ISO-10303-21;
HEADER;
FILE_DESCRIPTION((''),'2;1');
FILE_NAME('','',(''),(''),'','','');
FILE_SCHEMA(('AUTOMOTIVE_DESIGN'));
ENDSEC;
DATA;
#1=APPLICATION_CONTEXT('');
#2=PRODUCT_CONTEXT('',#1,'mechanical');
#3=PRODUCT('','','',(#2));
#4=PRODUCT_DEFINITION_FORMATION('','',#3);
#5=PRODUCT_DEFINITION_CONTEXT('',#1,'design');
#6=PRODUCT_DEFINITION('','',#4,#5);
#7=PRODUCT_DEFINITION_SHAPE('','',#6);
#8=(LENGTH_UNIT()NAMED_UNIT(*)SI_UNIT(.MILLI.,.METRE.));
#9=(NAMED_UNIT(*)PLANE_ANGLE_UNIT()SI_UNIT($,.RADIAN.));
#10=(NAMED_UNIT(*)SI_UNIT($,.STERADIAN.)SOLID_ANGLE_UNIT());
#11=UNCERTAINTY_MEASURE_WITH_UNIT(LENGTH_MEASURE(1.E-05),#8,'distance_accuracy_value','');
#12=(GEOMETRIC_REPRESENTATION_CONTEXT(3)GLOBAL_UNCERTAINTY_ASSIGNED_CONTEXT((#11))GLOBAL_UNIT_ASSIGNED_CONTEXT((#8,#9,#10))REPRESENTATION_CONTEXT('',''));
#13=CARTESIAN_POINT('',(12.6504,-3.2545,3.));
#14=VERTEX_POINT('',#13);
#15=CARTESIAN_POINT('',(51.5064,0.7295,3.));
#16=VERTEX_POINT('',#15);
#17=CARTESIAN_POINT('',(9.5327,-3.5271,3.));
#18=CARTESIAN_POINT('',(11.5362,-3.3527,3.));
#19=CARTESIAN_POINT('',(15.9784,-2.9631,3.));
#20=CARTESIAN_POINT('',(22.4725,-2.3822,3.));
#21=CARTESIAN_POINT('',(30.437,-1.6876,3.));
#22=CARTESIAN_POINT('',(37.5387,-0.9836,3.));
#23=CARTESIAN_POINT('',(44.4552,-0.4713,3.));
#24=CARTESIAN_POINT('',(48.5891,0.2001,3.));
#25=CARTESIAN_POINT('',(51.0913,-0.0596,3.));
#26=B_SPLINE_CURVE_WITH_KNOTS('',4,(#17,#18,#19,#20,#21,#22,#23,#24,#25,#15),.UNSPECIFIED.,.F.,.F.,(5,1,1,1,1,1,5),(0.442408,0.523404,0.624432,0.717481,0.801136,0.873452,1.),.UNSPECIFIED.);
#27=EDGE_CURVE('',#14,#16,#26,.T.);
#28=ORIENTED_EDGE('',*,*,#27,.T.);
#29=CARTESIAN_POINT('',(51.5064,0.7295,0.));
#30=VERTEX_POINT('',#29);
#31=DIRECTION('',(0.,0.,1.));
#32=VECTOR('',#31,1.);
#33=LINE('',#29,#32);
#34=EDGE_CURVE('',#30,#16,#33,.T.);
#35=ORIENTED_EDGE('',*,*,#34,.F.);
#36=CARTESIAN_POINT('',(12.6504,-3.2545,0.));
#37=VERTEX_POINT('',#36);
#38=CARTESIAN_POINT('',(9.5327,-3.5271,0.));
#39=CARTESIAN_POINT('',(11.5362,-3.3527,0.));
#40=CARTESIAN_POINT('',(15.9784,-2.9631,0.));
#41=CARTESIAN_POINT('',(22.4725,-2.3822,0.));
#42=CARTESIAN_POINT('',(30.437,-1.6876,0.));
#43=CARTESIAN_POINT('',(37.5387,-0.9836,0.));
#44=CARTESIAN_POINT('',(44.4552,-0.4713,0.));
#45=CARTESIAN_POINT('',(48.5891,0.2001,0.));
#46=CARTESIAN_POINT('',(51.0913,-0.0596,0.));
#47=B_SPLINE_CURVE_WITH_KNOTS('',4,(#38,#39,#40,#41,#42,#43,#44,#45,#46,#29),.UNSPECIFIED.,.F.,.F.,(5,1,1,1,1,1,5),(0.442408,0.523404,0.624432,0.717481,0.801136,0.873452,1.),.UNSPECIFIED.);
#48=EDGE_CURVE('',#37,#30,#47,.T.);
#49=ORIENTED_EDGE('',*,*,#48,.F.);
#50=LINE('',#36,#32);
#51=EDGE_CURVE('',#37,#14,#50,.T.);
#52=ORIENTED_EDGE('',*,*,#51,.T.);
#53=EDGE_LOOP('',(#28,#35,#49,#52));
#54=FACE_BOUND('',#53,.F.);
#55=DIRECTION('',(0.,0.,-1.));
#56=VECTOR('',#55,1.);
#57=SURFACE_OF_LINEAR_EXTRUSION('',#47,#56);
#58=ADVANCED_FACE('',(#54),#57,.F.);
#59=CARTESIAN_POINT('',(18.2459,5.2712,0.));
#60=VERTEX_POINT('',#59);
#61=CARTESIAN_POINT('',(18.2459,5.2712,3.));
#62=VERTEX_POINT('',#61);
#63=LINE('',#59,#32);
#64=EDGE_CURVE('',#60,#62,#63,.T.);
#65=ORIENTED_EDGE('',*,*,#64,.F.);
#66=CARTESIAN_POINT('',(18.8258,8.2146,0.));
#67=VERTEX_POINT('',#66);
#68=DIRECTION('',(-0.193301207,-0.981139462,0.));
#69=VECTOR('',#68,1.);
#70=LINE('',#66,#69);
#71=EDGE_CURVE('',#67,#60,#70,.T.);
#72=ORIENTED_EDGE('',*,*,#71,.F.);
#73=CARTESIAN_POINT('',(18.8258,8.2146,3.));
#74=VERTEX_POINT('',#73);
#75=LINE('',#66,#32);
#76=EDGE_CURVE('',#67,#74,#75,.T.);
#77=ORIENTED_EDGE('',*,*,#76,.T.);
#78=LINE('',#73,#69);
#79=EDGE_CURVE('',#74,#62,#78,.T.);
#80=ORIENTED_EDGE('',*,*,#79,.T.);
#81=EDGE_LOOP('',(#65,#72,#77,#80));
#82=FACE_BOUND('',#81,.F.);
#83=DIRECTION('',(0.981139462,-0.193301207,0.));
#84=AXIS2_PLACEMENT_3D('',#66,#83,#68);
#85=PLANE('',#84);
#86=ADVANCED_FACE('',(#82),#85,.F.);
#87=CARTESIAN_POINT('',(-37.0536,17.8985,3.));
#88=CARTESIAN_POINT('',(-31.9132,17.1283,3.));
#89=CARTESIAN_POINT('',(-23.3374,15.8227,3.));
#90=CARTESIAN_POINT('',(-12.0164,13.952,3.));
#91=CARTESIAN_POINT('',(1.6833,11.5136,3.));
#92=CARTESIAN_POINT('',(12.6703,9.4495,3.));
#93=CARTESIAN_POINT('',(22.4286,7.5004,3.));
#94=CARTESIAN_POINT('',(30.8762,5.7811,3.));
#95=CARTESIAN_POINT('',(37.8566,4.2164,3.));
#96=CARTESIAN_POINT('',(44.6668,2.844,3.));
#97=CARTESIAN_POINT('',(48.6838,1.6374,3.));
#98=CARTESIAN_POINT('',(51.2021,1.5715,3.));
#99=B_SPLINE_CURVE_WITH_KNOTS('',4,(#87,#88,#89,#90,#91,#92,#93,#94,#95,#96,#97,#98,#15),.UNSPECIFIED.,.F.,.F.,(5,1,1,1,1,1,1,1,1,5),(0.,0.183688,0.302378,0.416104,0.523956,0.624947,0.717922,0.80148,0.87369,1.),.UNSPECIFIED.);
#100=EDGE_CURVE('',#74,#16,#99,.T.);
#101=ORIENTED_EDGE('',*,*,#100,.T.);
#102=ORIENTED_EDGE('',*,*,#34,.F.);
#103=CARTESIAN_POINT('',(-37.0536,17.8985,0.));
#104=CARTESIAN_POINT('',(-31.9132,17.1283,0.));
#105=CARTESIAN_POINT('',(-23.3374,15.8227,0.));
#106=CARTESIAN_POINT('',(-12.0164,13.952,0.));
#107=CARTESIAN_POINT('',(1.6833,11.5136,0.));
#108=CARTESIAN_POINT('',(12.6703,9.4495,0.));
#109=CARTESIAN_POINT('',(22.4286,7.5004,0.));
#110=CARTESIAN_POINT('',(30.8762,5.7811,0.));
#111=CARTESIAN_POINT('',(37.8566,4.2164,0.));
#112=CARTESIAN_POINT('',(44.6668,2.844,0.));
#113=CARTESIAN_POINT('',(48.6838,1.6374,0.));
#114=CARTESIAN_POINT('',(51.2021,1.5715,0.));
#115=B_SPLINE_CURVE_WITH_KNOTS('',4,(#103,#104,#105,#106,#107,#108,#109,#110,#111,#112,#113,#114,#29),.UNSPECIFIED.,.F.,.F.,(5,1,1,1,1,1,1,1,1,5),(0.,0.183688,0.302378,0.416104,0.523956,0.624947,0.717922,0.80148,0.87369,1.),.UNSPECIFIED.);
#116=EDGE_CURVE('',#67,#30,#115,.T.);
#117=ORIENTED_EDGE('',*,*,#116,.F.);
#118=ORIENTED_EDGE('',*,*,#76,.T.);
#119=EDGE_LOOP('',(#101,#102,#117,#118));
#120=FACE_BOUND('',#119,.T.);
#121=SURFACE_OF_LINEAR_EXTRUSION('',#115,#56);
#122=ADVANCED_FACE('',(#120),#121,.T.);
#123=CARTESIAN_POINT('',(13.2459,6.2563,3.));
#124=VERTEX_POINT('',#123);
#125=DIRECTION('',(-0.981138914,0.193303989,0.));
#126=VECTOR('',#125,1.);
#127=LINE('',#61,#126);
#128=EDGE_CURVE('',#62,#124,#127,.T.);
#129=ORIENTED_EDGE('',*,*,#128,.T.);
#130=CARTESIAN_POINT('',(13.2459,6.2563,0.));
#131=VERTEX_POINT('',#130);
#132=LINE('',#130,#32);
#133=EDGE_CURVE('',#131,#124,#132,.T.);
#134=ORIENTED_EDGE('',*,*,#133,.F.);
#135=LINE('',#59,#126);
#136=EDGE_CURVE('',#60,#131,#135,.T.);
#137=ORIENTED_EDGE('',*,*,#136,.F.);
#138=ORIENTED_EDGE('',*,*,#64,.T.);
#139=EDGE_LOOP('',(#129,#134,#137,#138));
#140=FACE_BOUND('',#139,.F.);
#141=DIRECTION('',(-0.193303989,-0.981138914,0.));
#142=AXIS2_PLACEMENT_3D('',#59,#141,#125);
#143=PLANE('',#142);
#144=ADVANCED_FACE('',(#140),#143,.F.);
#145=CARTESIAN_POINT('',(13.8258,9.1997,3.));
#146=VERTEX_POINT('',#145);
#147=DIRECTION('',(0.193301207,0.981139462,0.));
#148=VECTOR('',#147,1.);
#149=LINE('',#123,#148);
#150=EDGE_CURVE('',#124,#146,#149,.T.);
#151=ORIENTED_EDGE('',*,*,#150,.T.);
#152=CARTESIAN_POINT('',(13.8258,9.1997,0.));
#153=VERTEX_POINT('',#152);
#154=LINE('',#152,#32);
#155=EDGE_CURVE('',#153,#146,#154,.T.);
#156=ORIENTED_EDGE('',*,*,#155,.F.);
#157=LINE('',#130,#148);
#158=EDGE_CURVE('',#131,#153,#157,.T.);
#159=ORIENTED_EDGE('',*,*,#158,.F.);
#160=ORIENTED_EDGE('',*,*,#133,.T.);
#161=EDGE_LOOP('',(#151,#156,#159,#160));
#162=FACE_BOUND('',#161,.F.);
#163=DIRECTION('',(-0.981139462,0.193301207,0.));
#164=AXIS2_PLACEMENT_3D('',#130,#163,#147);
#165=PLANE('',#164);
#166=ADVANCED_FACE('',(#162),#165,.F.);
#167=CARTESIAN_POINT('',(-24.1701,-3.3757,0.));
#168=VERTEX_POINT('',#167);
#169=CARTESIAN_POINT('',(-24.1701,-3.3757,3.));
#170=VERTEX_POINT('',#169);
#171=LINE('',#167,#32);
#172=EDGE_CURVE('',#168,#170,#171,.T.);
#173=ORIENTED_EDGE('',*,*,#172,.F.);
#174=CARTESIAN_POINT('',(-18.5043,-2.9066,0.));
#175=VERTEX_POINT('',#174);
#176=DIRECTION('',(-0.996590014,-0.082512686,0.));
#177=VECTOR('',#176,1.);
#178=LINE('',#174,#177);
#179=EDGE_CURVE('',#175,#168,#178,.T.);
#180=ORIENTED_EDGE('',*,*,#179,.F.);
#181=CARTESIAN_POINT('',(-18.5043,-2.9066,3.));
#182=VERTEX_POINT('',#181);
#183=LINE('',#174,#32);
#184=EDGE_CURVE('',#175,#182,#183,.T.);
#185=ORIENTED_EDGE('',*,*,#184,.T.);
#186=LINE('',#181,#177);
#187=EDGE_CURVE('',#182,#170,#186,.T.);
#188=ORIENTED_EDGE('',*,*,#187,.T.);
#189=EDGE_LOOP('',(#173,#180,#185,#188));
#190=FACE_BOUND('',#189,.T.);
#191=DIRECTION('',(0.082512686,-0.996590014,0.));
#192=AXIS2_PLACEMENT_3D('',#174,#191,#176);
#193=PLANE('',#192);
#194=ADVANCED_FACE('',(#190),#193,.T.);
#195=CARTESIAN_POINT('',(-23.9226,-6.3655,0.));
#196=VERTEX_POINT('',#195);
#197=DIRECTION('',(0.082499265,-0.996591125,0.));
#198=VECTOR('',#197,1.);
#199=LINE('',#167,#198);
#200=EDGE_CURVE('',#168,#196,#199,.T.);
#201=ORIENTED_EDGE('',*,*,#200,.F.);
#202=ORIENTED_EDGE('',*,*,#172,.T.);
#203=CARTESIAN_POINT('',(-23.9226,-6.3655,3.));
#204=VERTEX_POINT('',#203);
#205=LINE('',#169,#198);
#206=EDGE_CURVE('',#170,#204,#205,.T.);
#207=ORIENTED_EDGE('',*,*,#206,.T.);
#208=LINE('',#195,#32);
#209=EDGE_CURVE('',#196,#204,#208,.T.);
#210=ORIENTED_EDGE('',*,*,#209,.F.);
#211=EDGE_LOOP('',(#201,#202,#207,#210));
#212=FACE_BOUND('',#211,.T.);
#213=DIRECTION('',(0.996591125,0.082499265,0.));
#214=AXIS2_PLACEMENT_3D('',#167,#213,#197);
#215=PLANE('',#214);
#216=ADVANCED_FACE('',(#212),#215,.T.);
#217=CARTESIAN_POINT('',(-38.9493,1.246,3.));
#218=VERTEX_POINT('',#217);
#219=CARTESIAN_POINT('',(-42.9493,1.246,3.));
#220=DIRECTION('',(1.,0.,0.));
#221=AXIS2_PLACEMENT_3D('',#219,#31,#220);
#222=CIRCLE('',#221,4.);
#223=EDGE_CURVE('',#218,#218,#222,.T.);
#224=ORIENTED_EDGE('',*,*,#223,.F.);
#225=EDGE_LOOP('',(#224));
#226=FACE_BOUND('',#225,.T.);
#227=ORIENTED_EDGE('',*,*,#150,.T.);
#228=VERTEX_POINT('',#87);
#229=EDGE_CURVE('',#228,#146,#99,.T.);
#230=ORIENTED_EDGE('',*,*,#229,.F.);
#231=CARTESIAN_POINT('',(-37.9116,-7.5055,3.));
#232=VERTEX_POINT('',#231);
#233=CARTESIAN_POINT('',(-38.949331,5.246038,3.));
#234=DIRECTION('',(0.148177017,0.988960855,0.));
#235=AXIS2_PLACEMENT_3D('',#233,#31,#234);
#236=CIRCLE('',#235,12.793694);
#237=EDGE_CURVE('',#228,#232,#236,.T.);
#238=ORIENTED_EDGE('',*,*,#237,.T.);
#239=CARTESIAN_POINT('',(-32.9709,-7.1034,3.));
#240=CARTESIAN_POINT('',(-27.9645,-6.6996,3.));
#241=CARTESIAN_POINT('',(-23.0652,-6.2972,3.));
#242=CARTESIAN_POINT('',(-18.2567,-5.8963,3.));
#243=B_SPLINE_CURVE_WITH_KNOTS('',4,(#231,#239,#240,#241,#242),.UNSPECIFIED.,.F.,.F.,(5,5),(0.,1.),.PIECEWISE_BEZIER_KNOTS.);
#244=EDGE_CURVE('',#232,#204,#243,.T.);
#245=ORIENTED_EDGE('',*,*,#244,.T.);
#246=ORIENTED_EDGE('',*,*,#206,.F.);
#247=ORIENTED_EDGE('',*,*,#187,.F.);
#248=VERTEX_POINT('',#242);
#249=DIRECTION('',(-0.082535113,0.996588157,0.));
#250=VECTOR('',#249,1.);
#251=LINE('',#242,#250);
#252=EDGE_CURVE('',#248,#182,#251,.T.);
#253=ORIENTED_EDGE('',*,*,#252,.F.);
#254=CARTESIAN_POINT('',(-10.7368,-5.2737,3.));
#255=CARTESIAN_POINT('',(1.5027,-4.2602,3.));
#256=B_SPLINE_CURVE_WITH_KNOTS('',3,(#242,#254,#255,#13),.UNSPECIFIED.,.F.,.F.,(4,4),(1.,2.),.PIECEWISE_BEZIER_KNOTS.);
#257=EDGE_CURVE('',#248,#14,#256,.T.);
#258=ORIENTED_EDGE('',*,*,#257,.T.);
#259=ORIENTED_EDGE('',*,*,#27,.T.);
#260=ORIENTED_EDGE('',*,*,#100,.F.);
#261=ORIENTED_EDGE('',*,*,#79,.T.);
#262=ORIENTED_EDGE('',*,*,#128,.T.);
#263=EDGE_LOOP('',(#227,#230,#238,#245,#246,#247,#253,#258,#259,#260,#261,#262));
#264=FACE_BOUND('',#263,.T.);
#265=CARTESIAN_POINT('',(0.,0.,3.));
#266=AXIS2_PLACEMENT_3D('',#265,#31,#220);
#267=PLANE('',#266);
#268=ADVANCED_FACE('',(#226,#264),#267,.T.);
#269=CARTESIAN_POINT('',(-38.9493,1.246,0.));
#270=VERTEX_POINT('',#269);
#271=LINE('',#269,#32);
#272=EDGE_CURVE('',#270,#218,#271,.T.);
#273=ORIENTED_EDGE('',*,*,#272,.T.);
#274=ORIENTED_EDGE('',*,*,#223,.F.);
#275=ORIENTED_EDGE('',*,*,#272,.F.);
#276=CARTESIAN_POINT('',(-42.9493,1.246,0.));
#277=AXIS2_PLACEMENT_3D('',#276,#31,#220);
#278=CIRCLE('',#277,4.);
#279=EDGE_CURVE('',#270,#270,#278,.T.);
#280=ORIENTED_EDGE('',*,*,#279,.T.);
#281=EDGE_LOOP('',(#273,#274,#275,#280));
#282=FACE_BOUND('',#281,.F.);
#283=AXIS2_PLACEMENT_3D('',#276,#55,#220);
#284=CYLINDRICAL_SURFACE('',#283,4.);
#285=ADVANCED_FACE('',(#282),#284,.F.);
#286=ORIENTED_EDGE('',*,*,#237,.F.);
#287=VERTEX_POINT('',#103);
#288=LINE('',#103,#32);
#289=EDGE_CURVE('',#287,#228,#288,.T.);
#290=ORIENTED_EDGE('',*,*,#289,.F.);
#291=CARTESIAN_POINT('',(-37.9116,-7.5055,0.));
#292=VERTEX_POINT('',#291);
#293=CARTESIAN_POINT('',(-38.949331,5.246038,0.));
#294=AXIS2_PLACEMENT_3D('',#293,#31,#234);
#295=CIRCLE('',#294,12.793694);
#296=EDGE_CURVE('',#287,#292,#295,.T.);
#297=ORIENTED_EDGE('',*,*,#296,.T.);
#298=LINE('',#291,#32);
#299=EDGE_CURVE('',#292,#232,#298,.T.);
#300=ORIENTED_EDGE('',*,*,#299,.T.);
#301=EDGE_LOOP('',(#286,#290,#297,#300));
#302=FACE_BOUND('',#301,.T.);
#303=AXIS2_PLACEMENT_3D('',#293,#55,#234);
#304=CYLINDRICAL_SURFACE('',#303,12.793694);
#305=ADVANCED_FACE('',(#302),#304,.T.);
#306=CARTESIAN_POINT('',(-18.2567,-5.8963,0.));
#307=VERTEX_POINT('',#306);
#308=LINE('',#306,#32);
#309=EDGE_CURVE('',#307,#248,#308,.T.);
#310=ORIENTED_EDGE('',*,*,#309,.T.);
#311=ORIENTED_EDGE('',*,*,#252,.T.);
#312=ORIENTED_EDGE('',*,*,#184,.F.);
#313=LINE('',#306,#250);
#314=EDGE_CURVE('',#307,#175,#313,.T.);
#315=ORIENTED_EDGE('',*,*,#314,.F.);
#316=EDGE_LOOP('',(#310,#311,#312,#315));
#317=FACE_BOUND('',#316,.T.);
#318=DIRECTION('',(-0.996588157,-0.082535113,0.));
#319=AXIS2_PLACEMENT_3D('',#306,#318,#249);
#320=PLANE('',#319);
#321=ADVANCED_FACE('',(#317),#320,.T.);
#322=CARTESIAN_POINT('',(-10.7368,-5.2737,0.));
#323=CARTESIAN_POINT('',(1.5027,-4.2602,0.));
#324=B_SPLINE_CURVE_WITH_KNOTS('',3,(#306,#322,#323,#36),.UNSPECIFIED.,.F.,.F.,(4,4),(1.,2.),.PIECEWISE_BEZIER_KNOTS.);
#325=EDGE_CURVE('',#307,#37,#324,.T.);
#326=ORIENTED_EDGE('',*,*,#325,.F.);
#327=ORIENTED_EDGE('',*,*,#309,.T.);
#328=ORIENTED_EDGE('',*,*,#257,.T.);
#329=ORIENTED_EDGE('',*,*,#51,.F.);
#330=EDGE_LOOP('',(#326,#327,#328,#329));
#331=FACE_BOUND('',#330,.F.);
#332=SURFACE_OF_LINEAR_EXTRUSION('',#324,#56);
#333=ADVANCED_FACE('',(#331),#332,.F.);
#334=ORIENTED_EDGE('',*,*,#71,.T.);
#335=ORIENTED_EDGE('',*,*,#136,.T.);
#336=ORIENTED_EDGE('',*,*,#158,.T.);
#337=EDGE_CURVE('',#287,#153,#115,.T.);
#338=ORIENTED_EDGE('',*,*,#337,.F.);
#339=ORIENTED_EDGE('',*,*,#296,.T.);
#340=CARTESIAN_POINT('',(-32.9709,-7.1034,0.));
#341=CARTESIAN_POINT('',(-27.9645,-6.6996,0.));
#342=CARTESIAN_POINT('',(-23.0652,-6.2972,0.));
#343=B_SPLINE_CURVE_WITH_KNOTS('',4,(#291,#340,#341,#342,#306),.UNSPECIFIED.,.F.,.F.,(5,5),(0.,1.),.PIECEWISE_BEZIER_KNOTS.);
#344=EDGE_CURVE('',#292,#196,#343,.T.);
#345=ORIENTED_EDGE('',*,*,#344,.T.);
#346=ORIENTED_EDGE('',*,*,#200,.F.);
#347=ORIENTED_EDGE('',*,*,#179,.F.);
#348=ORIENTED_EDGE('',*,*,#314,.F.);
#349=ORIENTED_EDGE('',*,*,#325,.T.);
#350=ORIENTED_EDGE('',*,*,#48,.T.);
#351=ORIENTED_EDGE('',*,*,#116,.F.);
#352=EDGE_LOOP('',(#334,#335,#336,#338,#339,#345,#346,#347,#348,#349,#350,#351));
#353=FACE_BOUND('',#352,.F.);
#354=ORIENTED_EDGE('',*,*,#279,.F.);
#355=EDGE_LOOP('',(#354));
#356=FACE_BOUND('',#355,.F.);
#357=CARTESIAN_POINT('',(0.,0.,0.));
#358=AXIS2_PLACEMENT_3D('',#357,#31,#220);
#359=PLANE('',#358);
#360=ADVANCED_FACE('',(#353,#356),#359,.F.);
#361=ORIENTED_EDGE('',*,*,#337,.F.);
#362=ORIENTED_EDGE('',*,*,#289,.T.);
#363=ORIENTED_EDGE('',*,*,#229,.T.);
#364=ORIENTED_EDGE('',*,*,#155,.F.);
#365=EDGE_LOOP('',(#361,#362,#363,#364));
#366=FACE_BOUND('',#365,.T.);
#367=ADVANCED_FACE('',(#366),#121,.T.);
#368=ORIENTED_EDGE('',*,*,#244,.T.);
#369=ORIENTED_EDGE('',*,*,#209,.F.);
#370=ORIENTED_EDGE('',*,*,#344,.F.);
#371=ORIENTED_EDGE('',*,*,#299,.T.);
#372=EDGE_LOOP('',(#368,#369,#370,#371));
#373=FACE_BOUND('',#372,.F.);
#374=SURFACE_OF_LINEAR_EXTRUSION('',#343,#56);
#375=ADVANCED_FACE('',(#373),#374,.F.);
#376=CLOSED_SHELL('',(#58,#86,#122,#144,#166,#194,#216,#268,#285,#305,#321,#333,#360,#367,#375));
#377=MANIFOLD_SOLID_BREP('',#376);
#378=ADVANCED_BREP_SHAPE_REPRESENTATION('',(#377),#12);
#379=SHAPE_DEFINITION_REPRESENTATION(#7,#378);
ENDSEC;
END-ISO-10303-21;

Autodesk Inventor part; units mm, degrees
ref_plane "YZ Plane" through (0, 0, 0) normal (1, 0, 0) x (0, 1, 0)
ref_plane "XZ Plane" through (0, 0, 0) normal (0, 1, 0) x (-1, 0, 0)
ref_plane "XY Plane" through (0, 0, 0) normal (0, 0, 1) x (1, 0, 0)
sketch "Sketch1" plane through (0, 0, 0) normal (0, 0, 1) x (1, 0, 0)
  line L0 (18.8258, 8.2146) -> (18.2459, 5.2712)
  line L1 (13.8258, 9.1997) -> (18.8258, 8.2146)
  line L2 (13.2459, 6.2563) -> (13.8258, 9.1997)
  line L3 (18.2459, 5.2712) -> (13.2459, 6.2563)
  spline S0 degree 4 poles (-37.0536, 17.8985) (-31.9132, 17.1283) (-23.3374, 15.8227) (-12.0164, 13.952) (1.6833, 11.5136) (12.6703, 9.4495) (22.4286, 7.5004) (30.8762, 5.7811) (37.8566, 4.2164) (44.6668, 2.844) (48.6838, 1.6374) (51.2021, 1.5715) (51.5064, 0.7295) knots 0 0 0 0 0 0.183688 0.302378 0.416104 0.523956 0.624947 0.717922 0.80148 0.87369 1 1 1 1 1
  spline S1 degree 2 poles (-25.4832, 9.8892) (-25.3745, 9.8731) (-25.2658, 9.857) knots 0 0 0 1 1 1
  line L4 (-25.288, 9.8603) -> (-25.2437, 9.8537) construction
  arc A0 (-25.2481, 9.8544) -> (-25.2836, 9.8596) centre (-40.8454, -94.9669) ccw construction
  line L5 (-24.1701, -3.3757) -> (-23.9226, -6.3655)
  line L6 (-23.9226, -6.3655) -> (-18.2567, -5.8963)
  line L7 (-18.5043, -2.9066) -> (-24.1701, -3.3757)
  line L8 (-38.9493, 5.246) -> (-38.9493, 1.246)
  line L9 (-38.9493, 1.246) -> (-42.9493, 1.246)
  circle A1 centre (-42.9493, 1.246) radius 4
  arc A2 (-37.0536, 17.8985) -> (-37.9116, -7.5055) centre (-38.9493, 5.246) ccw
  line L10 (-18.2567, -5.8963) -> (-18.5043, -2.9066)
  line L11 (-20.2449, -6.0621) -> (-16.2685, -5.7306) construction
  arc A3 (-19.8473, -6.0287) -> (-16.6662, -5.7635) centre (-448.7094, 5192.5355) ccw construction
  spline S2 degree 4 poles (-37.9116, -7.5055) (-32.9709, -7.1034) (-27.9645, -6.6996) (-23.0652, -6.2972) (-18.2567, -5.8963) knots 0 0 0 0 0 1 1 1 1 1
  spline S3 degree 4 poles (9.5327, -3.5271) (11.5362, -3.3527) (15.9784, -2.9631) (22.4725, -2.3822) (30.437, -1.6876) (37.5387, -0.9836) (44.4552, -0.4713) (48.5891, 0.2001) (51.0913, -0.0596) (51.5064, 0.7295) knots 0.442408 0.442408 0.442408 0.442408 0.442408 0.523404 0.624432 0.717481 0.801136 0.873452 1 1 1 1 1
  line L12 (4.8603, -3.9339) -> (14.2051, -3.1204) construction
  arc A4 (5.7946, -3.8508) -> (13.2705, -3.2) centre (-353.3588, 4165.0638) ccw construction
  line L13 (-18.2567, -5.8963) -> (-10.7368, -5.2737) construction
  line L14 (-10.7368, -5.2737) -> (1.5027, -4.2602) construction
  line L15 (1.5027, -4.2602) -> (12.6504, -3.2545) construction
  spline S4 degree 3 poles (-18.2567, -5.8963) (-10.7368, -5.2737) (1.5027, -4.2602) (12.6504, -3.2545) knots 1 1 1 1 2 2 2 2
  point P0 (1.0416, 3.4084)
  point P1 (-2.4286, 1.7343)
  point P2 (-23.0646, 15.7415)
  point P3 (-9.9126, 13.5515)
  point P4 (2.2524, 11.3855)
  point P5 (13.3074, 9.3005)
  point P6 (23.1324, 7.3505)
  point P7 (31.6224, 5.5895)
  point P8 (38.6934, 4.0655)
  point P9 (44.2674, 2.8295)
  point P10 (48.2934, 1.9175)
  point P11 (50.7234, 1.3595)
  point P12 (31.1964, -1.5985)
  point P13 (38.3844, -0.9415)
  point P14 (44.0604, -0.4135)
  point P15 (48.1644, -0.0265)
  point P16 (50.6454, 0.2105)
  point P17 (-51.7356, 5.6816)
  point P18 (51.5064, 1.1705)
  point P19 (-51.7356, 19.9655)
  point P20 (-52.5456, -8.6665)
  point P21 (51.5064, 0.2885)
  point P22 (-37.0536, 5.2315)
  point P23 (-23.0646, 4.7238)
  point P24 (-9.9126, 4.1787)
  point P25 (2.2524, 3.6151)
  point P26 (13.3074, 3.0521)
  point P27 (23.1324, 2.5121)
  point P28 (31.6224, 2.015)
  point P29 (38.6934, 1.5764)
  point P30 (44.2674, 1.2178)
  point P31 (48.2934, 0.9517)
  point P32 (50.7234, 0.7885)
  point P33 (-25.8264, -0.2724)
  point P34 (9.9408, 3.0216)
  point P35 (-19.8876, 9.0264)
  point P36 (-14.6268, 8.1504)
  point P37 (-9.7608, 7.284)
  point P38 (-5.3388, 6.45)
  point P39 (-1.4088, 5.67)
  point P40 (1.9872, 4.9656)
  point P41 (4.8156, 4.356)
  point P42 (7.0452, 3.8616)
  point P43 (8.6556, 3.4968)
  point P44 (9.6276, 3.2736)
  point P45 (-20.2308, 0.1836)
  point P46 (-14.9568, 0.624)
  point P47 (-10.062, 1.0416)
  point P48 (-5.6016, 1.428)
  point P49 (-1.6272, 1.7796)
  point P50 (1.8168, 2.0904)
  point P51 (4.692, 2.3532)
  point P52 (6.9624, 2.5644)
  point P53 (8.604, 2.7192)
  point P54 (9.5964, 2.814)
  point P55 (9.5327, -3.5271)
  dimension "d11" = 3
  dimension "d12" = 5
  dimension "d13" = 52.7751
  dimension "d14" = 3
  dimension "d15" = 5.6658
  dimension "d16" = 4
  dimension "d17" = 4
  dimension "d18" = 8
extrude "Extrusion2" add sketch "Sketch1" along normal blind 3 contours S0 S3 S4 L10 L7 L5 S2 A2 L2 L3 L0
properties part number "2P.03.01.09.IM.FlapRibEnd" material "Wood (Walnut)"
